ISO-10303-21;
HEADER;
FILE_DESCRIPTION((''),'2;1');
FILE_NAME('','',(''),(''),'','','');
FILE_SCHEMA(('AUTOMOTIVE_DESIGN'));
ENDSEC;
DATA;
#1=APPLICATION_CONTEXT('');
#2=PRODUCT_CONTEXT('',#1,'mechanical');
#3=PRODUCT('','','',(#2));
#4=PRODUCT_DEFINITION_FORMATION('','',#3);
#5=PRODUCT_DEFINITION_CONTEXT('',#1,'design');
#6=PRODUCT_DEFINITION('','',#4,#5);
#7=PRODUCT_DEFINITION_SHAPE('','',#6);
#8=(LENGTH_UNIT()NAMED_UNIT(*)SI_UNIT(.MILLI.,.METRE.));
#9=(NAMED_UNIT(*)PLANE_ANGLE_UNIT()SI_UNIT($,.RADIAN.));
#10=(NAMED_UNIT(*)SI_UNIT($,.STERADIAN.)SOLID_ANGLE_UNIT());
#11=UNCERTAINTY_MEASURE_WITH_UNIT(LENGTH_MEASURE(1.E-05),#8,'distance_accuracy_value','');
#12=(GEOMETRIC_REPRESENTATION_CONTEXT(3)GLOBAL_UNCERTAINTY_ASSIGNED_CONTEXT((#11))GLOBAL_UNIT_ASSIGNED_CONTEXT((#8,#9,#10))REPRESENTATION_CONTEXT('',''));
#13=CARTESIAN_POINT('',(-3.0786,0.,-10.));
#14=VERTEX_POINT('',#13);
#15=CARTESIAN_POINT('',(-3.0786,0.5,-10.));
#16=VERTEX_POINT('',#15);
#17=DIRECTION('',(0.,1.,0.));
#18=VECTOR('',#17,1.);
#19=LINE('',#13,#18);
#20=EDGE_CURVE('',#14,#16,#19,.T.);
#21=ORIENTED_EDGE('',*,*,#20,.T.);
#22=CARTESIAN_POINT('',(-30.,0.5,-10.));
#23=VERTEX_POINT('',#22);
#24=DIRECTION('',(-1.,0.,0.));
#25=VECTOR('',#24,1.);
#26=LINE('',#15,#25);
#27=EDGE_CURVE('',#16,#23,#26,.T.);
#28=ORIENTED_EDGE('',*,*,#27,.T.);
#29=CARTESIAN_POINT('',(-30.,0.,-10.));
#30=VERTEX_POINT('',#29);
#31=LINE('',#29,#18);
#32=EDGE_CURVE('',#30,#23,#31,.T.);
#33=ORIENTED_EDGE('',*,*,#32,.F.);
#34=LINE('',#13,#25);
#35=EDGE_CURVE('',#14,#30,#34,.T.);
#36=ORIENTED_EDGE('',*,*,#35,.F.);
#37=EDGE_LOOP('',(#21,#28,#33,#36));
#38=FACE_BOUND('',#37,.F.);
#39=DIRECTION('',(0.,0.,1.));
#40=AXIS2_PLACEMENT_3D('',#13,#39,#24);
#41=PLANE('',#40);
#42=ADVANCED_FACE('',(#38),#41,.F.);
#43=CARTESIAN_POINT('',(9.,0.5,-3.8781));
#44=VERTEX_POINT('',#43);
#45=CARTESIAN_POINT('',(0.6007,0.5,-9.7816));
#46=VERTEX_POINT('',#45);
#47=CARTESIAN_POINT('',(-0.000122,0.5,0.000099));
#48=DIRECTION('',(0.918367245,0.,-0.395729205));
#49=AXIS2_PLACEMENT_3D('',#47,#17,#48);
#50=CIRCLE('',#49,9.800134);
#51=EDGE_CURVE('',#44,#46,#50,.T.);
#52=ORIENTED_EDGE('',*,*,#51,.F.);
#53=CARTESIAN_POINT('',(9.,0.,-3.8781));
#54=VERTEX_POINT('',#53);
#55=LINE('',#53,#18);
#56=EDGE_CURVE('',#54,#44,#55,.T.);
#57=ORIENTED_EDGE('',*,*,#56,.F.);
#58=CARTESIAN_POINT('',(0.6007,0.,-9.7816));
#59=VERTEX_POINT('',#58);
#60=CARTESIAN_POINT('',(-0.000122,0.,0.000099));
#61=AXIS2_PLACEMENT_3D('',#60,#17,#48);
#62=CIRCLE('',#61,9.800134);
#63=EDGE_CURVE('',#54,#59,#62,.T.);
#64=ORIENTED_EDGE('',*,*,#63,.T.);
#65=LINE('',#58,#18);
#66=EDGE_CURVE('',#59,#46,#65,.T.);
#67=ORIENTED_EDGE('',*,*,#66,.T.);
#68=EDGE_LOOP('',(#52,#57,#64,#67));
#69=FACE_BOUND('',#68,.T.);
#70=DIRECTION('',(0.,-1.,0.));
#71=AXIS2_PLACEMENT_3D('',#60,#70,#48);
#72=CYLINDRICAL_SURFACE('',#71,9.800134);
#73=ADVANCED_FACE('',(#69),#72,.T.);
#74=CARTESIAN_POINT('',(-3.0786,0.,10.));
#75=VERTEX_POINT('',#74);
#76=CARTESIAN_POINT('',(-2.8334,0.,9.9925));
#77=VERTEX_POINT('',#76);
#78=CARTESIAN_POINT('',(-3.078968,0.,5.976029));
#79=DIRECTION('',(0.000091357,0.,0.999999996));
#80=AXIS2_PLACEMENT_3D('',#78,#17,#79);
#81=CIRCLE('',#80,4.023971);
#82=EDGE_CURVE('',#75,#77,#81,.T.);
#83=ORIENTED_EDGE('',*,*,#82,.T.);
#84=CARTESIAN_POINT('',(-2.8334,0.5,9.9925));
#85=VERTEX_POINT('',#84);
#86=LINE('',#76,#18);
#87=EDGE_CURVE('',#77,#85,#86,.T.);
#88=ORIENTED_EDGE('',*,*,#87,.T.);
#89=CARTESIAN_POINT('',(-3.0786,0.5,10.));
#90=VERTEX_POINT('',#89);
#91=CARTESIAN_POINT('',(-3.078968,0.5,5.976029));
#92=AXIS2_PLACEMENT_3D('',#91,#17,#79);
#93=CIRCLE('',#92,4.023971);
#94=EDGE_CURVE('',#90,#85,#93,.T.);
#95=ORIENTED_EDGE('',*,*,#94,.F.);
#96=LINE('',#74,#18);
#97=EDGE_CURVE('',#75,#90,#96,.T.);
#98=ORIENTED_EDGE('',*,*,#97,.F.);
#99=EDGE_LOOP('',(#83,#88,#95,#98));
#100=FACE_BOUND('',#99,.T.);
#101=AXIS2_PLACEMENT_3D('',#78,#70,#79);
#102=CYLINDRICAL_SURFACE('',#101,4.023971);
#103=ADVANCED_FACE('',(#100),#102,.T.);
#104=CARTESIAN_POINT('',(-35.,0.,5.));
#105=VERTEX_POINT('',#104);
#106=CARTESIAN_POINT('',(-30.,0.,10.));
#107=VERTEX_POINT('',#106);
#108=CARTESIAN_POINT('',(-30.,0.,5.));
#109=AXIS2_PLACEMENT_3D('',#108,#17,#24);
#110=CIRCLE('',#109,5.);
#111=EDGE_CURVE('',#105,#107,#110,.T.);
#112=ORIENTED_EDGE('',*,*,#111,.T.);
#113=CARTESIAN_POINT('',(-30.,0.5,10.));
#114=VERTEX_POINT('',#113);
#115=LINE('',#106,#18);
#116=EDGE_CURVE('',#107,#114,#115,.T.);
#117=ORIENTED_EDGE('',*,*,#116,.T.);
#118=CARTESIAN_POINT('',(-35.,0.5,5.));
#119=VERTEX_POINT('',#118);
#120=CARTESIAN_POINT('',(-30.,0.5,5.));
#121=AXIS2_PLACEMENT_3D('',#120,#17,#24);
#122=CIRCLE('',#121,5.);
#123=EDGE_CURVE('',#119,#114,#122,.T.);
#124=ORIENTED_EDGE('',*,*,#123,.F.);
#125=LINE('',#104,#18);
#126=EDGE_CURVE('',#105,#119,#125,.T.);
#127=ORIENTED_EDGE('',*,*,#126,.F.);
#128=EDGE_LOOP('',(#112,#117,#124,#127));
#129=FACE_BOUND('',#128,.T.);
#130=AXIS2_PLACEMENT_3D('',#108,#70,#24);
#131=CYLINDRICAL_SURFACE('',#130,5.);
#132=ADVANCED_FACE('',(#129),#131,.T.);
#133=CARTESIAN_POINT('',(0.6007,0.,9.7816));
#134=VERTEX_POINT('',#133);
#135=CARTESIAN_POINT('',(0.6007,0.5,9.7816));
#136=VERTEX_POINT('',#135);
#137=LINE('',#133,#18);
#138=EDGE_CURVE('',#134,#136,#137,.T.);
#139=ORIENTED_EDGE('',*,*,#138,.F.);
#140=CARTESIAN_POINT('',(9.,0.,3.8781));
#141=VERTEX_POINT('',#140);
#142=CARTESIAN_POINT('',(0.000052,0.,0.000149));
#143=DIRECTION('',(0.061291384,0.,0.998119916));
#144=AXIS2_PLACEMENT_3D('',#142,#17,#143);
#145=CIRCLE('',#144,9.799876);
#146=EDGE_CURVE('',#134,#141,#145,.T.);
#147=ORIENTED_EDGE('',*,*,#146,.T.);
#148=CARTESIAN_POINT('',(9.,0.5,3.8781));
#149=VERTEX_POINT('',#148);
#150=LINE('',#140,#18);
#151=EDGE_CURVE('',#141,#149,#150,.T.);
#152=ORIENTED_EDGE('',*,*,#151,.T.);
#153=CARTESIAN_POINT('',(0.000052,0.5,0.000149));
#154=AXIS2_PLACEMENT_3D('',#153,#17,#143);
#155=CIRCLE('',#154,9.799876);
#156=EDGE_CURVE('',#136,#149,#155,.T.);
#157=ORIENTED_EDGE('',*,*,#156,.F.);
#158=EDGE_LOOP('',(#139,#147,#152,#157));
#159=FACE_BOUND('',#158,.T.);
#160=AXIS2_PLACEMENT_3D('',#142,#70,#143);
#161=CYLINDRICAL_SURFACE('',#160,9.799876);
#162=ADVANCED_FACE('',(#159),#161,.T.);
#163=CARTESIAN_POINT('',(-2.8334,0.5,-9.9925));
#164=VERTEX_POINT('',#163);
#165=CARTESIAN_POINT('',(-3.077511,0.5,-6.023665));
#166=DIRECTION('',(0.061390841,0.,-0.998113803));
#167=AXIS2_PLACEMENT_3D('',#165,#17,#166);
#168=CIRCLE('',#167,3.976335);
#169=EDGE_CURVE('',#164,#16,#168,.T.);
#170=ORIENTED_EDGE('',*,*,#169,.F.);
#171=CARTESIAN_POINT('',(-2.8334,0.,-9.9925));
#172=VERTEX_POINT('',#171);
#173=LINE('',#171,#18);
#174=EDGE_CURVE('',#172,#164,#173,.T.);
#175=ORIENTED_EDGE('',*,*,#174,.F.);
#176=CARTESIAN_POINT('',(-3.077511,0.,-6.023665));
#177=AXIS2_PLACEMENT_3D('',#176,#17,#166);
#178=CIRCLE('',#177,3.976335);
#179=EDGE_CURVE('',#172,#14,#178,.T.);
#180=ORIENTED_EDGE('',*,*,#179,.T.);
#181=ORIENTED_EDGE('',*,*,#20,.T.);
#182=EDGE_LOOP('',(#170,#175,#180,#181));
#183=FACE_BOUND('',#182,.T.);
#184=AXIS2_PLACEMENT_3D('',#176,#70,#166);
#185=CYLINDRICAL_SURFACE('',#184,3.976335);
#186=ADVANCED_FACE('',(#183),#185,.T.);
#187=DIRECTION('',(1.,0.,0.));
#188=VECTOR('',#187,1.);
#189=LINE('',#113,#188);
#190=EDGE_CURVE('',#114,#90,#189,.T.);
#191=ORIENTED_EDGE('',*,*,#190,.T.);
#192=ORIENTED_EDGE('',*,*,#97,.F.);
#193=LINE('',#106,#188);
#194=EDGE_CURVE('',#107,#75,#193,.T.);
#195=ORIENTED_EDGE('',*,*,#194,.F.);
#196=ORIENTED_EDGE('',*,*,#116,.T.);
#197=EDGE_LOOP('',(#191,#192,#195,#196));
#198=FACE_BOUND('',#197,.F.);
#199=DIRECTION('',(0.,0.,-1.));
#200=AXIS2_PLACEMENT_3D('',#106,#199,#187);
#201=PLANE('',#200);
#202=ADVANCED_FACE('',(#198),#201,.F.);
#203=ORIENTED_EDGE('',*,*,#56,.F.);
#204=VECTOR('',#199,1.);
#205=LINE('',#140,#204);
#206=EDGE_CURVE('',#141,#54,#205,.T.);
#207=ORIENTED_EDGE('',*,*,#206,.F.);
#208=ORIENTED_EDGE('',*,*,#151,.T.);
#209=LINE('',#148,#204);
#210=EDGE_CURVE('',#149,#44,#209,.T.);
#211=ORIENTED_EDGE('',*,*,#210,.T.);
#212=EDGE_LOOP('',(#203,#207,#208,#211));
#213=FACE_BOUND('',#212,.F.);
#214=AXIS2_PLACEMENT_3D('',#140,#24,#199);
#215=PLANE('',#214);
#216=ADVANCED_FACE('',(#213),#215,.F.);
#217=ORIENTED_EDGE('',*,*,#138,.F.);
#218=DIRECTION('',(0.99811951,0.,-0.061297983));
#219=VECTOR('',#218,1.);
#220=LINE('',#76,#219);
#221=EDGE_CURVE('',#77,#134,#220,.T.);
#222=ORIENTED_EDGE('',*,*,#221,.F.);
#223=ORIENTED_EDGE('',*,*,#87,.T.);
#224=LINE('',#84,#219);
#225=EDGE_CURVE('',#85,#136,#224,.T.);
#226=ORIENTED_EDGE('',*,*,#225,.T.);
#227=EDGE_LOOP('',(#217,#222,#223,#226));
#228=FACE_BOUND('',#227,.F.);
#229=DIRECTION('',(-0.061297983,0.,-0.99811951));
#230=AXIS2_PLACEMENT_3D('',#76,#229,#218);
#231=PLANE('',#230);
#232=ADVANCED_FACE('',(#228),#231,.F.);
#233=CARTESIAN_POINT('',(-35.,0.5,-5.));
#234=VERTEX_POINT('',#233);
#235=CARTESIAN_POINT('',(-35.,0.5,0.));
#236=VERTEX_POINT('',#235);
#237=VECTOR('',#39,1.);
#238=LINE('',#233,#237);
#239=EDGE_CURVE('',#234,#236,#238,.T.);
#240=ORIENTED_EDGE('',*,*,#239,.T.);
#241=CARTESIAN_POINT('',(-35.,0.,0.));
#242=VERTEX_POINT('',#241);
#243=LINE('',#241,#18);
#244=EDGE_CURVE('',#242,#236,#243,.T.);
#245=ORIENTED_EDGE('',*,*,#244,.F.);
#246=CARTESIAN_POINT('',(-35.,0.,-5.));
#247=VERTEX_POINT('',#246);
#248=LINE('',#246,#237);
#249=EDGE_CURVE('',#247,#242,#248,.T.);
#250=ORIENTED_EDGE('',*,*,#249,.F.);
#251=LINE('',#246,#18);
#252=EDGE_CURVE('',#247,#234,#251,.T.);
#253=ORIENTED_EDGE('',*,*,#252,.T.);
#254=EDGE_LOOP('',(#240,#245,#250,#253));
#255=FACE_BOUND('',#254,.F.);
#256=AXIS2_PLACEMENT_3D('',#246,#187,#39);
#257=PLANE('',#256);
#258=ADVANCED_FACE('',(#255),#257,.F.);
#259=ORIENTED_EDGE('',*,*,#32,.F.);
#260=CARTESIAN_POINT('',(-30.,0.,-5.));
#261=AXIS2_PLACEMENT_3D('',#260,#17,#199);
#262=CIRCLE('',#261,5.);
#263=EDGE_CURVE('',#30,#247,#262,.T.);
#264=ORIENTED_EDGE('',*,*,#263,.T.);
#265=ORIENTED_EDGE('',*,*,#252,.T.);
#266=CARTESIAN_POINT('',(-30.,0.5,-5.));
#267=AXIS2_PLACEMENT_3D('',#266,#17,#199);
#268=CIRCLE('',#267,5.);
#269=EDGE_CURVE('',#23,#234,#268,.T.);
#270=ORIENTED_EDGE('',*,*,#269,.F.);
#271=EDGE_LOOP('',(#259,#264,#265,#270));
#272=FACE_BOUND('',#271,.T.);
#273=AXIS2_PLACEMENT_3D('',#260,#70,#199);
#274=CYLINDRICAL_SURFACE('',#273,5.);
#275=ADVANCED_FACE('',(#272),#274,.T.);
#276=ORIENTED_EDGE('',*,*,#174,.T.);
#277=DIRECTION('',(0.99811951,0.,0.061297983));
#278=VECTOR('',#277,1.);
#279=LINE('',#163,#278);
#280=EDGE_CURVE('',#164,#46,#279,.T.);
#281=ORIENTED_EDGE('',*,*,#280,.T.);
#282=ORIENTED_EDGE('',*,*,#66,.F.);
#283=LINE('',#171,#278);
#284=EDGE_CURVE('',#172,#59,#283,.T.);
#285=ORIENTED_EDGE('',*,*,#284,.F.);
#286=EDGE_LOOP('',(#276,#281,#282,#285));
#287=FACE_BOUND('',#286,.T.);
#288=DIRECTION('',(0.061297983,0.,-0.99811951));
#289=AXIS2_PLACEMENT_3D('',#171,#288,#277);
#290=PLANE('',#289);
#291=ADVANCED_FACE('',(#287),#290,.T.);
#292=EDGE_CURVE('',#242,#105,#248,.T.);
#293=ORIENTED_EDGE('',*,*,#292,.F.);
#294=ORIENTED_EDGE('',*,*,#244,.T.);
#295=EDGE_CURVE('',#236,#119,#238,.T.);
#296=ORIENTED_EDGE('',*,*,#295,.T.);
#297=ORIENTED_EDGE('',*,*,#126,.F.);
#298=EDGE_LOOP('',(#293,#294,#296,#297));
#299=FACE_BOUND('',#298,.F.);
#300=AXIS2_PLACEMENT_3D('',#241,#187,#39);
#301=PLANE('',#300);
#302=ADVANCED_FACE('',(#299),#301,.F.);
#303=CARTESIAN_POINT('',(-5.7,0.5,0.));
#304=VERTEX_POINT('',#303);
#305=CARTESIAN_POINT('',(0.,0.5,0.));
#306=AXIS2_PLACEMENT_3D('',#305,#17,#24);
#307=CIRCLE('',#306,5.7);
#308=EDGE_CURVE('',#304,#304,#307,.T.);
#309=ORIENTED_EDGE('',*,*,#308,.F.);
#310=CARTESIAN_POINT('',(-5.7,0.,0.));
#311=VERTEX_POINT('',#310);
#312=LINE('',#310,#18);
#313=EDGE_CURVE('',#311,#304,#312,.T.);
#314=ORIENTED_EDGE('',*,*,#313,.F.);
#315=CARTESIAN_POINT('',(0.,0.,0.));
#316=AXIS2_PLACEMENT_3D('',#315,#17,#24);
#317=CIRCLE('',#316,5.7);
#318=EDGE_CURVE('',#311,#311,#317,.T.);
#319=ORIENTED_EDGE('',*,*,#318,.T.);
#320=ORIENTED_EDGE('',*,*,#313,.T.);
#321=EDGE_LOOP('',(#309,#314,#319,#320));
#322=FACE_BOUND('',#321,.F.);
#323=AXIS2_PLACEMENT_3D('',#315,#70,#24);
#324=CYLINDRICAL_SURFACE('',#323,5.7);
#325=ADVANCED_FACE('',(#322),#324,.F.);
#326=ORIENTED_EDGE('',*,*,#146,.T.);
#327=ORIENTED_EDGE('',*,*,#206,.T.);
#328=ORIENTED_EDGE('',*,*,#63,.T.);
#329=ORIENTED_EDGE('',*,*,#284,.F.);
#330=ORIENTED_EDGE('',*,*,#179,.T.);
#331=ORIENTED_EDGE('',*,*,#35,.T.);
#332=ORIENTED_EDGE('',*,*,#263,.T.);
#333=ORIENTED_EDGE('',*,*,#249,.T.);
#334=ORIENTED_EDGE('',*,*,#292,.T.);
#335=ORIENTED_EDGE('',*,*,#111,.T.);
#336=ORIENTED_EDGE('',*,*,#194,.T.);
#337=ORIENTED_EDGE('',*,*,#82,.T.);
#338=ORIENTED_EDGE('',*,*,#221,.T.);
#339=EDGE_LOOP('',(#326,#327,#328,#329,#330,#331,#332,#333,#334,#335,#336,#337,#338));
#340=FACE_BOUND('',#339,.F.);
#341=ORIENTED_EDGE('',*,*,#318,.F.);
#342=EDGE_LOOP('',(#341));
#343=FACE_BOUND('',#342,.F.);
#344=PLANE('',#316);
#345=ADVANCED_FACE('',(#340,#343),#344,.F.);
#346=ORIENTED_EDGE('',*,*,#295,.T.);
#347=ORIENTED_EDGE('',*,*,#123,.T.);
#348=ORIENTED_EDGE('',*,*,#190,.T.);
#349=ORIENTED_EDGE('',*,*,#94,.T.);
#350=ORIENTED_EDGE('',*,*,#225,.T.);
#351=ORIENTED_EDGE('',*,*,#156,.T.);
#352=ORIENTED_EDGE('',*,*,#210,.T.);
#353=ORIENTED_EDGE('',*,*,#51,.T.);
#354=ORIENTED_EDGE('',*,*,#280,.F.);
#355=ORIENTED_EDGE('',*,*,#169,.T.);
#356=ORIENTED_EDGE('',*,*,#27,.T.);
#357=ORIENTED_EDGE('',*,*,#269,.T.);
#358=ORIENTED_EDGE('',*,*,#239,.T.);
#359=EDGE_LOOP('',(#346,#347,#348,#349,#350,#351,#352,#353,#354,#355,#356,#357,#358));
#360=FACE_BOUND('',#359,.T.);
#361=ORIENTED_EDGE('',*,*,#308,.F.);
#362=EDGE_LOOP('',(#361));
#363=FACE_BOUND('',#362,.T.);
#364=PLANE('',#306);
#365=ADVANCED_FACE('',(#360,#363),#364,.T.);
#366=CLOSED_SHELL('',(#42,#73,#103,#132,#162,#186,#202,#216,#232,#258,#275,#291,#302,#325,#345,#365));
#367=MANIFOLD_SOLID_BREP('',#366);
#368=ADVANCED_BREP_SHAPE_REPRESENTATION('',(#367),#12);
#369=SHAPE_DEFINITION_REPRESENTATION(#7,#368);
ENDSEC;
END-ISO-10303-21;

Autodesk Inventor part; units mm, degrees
ref_plane "YZ Plane" through (0, 0, 0) normal (1, 0, 0) x (0, 1, 0)
ref_plane "XZ Plane" through (0, 0, 0) normal (0, 1, 0) x (-1, 0, 0)
ref_plane "XY Plane" through (0, 0, 0) normal (0, 0, 1) x (1, 0, 0)
sketch "Sketch1" plane through (0, 0, 0) normal (0, 1, 0) x (-1, 0, 0)
  circle A0 centre (0, 0) radius 5.7
  arc A1 (0, 9) -> (0, -9) centre (0, 0) ccw construction
  line L0 (0, 9) -> (12.65, 9) construction
  line L1 (12.65, 9) -> (12.65, -9) construction
  line L2 (0, 0) -> (0, -9) construction
  line L3 (3.0786, -10) -> (30, -10)
  line L4 (35, -5) -> (35, 5)
  line L5 (30, 10) -> (3.0786, 10)
  arc A2 (35, 5) -> (30, 10) centre (30, 5) ccw
  arc A3 (30, -10) -> (35, -5) centre (30, -5) ccw
  line L6 (2.8334, -9.9925) -> (-0.6007, -9.7816)
  line L7 (2.8334, 9.9925) -> (-0.6007, 9.7816)
  arc A4 (2.8334, -9.9925) -> (3.0786, -10) centre (3.0786, -6) ccw
  arc A5 (3.0786, 10) -> (2.8334, 9.9925) centre (3.0786, 6) ccw
  line L8 (0, 0) -> (36.2824, 0)
  line L9 (-9, 3.8781) -> (-9, -3.8781)
  arc A6 (-0.6007, 9.7816) -> (-9, 3.8781) centre (0, 0) ccw
  arc A7 (-9, -3.8781) -> (-0.6007, -9.7816) centre (0, 0) ccw
  point P0 (35, -10)
  point P1 (35, 10)
  point P2 (2, -10)
  point P3 (2.9559, 10)
  dimension "d0" = 11.4
  dimension "d1" = 9
  dimension "d2" = 12.65
  dimension "d6" = 5
  dimension "d10" = 20
  dimension "d12" = 4
  dimension "d13" = 20
  dimension "d14" = 20
extrude "Extrusion1" add sketch "Sketch1" along normal blind 0.5
properties part number "Laser-Pivot-Ringpull"
